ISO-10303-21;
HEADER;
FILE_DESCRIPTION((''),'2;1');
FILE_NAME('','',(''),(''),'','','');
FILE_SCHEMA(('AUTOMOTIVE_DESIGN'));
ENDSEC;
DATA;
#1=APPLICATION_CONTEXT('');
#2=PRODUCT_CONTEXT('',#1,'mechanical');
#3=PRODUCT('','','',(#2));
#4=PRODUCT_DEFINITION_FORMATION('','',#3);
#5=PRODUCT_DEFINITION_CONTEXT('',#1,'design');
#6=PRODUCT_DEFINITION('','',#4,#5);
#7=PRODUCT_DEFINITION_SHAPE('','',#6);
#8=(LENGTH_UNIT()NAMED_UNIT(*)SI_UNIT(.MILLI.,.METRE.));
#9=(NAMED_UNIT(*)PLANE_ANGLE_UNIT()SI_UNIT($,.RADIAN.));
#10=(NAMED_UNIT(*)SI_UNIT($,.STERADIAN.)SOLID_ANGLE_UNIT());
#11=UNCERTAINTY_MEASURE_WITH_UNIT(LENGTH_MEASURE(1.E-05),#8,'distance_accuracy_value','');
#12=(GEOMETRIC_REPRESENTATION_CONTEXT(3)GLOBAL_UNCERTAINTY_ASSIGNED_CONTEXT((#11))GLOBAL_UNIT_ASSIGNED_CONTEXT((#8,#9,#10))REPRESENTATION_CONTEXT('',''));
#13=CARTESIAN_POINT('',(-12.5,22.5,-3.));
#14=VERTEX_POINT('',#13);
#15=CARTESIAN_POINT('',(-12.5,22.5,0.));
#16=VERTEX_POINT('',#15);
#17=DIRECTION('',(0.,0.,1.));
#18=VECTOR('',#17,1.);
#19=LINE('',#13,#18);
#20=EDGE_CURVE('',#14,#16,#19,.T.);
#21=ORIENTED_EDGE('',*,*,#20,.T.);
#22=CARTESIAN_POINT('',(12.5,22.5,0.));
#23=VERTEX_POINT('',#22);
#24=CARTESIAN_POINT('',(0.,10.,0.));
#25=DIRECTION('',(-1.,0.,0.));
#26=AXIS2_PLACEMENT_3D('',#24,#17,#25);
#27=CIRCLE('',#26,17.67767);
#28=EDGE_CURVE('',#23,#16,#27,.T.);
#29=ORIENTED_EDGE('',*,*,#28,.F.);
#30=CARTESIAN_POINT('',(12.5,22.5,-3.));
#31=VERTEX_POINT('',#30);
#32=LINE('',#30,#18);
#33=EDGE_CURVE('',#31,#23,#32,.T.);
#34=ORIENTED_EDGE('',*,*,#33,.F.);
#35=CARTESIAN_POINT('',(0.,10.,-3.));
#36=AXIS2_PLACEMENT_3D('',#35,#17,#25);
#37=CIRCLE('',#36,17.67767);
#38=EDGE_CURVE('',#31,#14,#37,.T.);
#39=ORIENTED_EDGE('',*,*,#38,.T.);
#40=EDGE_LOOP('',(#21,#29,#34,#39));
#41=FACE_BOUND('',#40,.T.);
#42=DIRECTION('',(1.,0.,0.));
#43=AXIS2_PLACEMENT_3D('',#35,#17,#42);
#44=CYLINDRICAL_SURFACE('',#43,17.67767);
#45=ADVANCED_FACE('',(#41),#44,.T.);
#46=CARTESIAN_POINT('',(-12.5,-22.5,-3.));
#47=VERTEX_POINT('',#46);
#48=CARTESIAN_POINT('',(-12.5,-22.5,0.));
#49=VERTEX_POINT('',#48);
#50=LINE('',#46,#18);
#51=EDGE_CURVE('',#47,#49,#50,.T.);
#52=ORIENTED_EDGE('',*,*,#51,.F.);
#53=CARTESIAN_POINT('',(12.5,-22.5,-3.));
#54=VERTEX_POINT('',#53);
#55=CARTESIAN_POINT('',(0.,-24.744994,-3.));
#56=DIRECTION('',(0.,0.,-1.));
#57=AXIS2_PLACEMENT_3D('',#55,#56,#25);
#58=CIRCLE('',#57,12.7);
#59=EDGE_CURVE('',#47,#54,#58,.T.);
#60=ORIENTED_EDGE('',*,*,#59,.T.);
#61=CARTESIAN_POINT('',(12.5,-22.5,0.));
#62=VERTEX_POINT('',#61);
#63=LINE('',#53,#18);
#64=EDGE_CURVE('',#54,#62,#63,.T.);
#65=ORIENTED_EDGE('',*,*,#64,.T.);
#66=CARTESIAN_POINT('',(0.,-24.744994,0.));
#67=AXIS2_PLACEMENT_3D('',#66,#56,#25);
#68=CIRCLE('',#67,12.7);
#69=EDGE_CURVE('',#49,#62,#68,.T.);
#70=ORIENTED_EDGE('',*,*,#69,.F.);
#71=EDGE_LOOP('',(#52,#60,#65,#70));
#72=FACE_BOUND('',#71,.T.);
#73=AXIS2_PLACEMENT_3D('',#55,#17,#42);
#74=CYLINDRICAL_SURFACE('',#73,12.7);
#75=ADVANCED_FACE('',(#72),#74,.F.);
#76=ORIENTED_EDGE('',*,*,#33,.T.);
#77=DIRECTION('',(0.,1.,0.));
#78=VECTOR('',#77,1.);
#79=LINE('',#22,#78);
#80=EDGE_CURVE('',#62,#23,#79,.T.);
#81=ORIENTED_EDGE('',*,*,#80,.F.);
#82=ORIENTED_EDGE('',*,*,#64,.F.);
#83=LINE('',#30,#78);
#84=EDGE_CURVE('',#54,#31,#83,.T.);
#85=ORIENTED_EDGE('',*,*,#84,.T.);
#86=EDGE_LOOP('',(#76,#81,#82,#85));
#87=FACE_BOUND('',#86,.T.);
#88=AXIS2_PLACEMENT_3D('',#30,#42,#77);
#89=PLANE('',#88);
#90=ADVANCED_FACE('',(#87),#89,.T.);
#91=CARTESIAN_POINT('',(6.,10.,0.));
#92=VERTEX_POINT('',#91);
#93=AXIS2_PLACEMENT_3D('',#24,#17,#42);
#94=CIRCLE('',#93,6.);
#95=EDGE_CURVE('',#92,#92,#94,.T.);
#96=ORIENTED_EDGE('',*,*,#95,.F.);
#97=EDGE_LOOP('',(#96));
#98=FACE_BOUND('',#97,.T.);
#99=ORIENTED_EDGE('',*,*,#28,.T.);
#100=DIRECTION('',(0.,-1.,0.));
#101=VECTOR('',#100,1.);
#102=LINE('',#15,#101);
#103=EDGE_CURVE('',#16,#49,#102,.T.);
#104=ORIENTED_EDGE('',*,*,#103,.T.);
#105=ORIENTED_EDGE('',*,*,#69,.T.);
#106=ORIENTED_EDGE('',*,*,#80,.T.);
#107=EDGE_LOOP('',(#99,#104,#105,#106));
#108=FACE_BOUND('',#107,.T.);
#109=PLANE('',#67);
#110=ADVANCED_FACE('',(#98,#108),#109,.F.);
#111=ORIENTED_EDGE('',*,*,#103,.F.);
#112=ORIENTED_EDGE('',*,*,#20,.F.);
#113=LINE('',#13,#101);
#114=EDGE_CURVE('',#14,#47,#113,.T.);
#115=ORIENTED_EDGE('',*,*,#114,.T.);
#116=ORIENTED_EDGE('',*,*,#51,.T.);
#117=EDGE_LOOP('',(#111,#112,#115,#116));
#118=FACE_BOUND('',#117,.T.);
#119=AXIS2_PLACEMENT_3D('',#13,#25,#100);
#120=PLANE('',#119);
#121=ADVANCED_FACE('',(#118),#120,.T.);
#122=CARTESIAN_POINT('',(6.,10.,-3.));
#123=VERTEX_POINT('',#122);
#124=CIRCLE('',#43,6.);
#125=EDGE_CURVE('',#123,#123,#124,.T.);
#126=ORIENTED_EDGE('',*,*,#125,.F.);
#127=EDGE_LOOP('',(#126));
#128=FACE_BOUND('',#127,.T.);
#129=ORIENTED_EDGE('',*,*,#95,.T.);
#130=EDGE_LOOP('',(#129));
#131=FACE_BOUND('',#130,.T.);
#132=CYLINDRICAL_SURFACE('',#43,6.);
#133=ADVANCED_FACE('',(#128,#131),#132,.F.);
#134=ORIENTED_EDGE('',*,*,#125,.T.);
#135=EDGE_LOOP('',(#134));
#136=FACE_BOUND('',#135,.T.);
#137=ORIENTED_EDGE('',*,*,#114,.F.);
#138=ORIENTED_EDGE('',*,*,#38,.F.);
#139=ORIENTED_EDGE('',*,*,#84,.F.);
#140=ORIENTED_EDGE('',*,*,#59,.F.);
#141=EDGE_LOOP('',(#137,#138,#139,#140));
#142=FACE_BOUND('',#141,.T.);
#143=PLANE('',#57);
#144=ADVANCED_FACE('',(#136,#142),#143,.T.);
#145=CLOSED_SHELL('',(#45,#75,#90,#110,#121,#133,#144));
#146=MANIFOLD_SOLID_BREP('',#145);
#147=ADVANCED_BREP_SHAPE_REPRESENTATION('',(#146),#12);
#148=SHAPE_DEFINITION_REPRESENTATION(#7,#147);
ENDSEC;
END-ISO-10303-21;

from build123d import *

# Parameters (mm, degrees)
SKETCH1_R          = 6
BASE_FLANGE1_DEPTH = 3


# Sheet-metal steps are written as plain solids
with BuildPart() as part:
    # Sketch1 → Base-Flange1 (new body)
    with BuildSketch(Plane.XY):
        with BuildLine():
            Line((-12.5, 22.5), (-12.5, -22.5))
            ThreePointArc((-12.5, -22.5), (0, -12.044994432), (12.5, -22.5))
            Line((12.5, -22.5), (12.5, 22.5))
            ThreePointArc((12.5, 22.5), (0, 27.67766953), (-12.5, 22.5))
        make_face()
        with Locations((0, 10)):
            Circle(SKETCH1_R, mode=Mode.SUBTRACT)
    extrude(amount=-BASE_FLANGE1_DEPTH)


solid = part.part
